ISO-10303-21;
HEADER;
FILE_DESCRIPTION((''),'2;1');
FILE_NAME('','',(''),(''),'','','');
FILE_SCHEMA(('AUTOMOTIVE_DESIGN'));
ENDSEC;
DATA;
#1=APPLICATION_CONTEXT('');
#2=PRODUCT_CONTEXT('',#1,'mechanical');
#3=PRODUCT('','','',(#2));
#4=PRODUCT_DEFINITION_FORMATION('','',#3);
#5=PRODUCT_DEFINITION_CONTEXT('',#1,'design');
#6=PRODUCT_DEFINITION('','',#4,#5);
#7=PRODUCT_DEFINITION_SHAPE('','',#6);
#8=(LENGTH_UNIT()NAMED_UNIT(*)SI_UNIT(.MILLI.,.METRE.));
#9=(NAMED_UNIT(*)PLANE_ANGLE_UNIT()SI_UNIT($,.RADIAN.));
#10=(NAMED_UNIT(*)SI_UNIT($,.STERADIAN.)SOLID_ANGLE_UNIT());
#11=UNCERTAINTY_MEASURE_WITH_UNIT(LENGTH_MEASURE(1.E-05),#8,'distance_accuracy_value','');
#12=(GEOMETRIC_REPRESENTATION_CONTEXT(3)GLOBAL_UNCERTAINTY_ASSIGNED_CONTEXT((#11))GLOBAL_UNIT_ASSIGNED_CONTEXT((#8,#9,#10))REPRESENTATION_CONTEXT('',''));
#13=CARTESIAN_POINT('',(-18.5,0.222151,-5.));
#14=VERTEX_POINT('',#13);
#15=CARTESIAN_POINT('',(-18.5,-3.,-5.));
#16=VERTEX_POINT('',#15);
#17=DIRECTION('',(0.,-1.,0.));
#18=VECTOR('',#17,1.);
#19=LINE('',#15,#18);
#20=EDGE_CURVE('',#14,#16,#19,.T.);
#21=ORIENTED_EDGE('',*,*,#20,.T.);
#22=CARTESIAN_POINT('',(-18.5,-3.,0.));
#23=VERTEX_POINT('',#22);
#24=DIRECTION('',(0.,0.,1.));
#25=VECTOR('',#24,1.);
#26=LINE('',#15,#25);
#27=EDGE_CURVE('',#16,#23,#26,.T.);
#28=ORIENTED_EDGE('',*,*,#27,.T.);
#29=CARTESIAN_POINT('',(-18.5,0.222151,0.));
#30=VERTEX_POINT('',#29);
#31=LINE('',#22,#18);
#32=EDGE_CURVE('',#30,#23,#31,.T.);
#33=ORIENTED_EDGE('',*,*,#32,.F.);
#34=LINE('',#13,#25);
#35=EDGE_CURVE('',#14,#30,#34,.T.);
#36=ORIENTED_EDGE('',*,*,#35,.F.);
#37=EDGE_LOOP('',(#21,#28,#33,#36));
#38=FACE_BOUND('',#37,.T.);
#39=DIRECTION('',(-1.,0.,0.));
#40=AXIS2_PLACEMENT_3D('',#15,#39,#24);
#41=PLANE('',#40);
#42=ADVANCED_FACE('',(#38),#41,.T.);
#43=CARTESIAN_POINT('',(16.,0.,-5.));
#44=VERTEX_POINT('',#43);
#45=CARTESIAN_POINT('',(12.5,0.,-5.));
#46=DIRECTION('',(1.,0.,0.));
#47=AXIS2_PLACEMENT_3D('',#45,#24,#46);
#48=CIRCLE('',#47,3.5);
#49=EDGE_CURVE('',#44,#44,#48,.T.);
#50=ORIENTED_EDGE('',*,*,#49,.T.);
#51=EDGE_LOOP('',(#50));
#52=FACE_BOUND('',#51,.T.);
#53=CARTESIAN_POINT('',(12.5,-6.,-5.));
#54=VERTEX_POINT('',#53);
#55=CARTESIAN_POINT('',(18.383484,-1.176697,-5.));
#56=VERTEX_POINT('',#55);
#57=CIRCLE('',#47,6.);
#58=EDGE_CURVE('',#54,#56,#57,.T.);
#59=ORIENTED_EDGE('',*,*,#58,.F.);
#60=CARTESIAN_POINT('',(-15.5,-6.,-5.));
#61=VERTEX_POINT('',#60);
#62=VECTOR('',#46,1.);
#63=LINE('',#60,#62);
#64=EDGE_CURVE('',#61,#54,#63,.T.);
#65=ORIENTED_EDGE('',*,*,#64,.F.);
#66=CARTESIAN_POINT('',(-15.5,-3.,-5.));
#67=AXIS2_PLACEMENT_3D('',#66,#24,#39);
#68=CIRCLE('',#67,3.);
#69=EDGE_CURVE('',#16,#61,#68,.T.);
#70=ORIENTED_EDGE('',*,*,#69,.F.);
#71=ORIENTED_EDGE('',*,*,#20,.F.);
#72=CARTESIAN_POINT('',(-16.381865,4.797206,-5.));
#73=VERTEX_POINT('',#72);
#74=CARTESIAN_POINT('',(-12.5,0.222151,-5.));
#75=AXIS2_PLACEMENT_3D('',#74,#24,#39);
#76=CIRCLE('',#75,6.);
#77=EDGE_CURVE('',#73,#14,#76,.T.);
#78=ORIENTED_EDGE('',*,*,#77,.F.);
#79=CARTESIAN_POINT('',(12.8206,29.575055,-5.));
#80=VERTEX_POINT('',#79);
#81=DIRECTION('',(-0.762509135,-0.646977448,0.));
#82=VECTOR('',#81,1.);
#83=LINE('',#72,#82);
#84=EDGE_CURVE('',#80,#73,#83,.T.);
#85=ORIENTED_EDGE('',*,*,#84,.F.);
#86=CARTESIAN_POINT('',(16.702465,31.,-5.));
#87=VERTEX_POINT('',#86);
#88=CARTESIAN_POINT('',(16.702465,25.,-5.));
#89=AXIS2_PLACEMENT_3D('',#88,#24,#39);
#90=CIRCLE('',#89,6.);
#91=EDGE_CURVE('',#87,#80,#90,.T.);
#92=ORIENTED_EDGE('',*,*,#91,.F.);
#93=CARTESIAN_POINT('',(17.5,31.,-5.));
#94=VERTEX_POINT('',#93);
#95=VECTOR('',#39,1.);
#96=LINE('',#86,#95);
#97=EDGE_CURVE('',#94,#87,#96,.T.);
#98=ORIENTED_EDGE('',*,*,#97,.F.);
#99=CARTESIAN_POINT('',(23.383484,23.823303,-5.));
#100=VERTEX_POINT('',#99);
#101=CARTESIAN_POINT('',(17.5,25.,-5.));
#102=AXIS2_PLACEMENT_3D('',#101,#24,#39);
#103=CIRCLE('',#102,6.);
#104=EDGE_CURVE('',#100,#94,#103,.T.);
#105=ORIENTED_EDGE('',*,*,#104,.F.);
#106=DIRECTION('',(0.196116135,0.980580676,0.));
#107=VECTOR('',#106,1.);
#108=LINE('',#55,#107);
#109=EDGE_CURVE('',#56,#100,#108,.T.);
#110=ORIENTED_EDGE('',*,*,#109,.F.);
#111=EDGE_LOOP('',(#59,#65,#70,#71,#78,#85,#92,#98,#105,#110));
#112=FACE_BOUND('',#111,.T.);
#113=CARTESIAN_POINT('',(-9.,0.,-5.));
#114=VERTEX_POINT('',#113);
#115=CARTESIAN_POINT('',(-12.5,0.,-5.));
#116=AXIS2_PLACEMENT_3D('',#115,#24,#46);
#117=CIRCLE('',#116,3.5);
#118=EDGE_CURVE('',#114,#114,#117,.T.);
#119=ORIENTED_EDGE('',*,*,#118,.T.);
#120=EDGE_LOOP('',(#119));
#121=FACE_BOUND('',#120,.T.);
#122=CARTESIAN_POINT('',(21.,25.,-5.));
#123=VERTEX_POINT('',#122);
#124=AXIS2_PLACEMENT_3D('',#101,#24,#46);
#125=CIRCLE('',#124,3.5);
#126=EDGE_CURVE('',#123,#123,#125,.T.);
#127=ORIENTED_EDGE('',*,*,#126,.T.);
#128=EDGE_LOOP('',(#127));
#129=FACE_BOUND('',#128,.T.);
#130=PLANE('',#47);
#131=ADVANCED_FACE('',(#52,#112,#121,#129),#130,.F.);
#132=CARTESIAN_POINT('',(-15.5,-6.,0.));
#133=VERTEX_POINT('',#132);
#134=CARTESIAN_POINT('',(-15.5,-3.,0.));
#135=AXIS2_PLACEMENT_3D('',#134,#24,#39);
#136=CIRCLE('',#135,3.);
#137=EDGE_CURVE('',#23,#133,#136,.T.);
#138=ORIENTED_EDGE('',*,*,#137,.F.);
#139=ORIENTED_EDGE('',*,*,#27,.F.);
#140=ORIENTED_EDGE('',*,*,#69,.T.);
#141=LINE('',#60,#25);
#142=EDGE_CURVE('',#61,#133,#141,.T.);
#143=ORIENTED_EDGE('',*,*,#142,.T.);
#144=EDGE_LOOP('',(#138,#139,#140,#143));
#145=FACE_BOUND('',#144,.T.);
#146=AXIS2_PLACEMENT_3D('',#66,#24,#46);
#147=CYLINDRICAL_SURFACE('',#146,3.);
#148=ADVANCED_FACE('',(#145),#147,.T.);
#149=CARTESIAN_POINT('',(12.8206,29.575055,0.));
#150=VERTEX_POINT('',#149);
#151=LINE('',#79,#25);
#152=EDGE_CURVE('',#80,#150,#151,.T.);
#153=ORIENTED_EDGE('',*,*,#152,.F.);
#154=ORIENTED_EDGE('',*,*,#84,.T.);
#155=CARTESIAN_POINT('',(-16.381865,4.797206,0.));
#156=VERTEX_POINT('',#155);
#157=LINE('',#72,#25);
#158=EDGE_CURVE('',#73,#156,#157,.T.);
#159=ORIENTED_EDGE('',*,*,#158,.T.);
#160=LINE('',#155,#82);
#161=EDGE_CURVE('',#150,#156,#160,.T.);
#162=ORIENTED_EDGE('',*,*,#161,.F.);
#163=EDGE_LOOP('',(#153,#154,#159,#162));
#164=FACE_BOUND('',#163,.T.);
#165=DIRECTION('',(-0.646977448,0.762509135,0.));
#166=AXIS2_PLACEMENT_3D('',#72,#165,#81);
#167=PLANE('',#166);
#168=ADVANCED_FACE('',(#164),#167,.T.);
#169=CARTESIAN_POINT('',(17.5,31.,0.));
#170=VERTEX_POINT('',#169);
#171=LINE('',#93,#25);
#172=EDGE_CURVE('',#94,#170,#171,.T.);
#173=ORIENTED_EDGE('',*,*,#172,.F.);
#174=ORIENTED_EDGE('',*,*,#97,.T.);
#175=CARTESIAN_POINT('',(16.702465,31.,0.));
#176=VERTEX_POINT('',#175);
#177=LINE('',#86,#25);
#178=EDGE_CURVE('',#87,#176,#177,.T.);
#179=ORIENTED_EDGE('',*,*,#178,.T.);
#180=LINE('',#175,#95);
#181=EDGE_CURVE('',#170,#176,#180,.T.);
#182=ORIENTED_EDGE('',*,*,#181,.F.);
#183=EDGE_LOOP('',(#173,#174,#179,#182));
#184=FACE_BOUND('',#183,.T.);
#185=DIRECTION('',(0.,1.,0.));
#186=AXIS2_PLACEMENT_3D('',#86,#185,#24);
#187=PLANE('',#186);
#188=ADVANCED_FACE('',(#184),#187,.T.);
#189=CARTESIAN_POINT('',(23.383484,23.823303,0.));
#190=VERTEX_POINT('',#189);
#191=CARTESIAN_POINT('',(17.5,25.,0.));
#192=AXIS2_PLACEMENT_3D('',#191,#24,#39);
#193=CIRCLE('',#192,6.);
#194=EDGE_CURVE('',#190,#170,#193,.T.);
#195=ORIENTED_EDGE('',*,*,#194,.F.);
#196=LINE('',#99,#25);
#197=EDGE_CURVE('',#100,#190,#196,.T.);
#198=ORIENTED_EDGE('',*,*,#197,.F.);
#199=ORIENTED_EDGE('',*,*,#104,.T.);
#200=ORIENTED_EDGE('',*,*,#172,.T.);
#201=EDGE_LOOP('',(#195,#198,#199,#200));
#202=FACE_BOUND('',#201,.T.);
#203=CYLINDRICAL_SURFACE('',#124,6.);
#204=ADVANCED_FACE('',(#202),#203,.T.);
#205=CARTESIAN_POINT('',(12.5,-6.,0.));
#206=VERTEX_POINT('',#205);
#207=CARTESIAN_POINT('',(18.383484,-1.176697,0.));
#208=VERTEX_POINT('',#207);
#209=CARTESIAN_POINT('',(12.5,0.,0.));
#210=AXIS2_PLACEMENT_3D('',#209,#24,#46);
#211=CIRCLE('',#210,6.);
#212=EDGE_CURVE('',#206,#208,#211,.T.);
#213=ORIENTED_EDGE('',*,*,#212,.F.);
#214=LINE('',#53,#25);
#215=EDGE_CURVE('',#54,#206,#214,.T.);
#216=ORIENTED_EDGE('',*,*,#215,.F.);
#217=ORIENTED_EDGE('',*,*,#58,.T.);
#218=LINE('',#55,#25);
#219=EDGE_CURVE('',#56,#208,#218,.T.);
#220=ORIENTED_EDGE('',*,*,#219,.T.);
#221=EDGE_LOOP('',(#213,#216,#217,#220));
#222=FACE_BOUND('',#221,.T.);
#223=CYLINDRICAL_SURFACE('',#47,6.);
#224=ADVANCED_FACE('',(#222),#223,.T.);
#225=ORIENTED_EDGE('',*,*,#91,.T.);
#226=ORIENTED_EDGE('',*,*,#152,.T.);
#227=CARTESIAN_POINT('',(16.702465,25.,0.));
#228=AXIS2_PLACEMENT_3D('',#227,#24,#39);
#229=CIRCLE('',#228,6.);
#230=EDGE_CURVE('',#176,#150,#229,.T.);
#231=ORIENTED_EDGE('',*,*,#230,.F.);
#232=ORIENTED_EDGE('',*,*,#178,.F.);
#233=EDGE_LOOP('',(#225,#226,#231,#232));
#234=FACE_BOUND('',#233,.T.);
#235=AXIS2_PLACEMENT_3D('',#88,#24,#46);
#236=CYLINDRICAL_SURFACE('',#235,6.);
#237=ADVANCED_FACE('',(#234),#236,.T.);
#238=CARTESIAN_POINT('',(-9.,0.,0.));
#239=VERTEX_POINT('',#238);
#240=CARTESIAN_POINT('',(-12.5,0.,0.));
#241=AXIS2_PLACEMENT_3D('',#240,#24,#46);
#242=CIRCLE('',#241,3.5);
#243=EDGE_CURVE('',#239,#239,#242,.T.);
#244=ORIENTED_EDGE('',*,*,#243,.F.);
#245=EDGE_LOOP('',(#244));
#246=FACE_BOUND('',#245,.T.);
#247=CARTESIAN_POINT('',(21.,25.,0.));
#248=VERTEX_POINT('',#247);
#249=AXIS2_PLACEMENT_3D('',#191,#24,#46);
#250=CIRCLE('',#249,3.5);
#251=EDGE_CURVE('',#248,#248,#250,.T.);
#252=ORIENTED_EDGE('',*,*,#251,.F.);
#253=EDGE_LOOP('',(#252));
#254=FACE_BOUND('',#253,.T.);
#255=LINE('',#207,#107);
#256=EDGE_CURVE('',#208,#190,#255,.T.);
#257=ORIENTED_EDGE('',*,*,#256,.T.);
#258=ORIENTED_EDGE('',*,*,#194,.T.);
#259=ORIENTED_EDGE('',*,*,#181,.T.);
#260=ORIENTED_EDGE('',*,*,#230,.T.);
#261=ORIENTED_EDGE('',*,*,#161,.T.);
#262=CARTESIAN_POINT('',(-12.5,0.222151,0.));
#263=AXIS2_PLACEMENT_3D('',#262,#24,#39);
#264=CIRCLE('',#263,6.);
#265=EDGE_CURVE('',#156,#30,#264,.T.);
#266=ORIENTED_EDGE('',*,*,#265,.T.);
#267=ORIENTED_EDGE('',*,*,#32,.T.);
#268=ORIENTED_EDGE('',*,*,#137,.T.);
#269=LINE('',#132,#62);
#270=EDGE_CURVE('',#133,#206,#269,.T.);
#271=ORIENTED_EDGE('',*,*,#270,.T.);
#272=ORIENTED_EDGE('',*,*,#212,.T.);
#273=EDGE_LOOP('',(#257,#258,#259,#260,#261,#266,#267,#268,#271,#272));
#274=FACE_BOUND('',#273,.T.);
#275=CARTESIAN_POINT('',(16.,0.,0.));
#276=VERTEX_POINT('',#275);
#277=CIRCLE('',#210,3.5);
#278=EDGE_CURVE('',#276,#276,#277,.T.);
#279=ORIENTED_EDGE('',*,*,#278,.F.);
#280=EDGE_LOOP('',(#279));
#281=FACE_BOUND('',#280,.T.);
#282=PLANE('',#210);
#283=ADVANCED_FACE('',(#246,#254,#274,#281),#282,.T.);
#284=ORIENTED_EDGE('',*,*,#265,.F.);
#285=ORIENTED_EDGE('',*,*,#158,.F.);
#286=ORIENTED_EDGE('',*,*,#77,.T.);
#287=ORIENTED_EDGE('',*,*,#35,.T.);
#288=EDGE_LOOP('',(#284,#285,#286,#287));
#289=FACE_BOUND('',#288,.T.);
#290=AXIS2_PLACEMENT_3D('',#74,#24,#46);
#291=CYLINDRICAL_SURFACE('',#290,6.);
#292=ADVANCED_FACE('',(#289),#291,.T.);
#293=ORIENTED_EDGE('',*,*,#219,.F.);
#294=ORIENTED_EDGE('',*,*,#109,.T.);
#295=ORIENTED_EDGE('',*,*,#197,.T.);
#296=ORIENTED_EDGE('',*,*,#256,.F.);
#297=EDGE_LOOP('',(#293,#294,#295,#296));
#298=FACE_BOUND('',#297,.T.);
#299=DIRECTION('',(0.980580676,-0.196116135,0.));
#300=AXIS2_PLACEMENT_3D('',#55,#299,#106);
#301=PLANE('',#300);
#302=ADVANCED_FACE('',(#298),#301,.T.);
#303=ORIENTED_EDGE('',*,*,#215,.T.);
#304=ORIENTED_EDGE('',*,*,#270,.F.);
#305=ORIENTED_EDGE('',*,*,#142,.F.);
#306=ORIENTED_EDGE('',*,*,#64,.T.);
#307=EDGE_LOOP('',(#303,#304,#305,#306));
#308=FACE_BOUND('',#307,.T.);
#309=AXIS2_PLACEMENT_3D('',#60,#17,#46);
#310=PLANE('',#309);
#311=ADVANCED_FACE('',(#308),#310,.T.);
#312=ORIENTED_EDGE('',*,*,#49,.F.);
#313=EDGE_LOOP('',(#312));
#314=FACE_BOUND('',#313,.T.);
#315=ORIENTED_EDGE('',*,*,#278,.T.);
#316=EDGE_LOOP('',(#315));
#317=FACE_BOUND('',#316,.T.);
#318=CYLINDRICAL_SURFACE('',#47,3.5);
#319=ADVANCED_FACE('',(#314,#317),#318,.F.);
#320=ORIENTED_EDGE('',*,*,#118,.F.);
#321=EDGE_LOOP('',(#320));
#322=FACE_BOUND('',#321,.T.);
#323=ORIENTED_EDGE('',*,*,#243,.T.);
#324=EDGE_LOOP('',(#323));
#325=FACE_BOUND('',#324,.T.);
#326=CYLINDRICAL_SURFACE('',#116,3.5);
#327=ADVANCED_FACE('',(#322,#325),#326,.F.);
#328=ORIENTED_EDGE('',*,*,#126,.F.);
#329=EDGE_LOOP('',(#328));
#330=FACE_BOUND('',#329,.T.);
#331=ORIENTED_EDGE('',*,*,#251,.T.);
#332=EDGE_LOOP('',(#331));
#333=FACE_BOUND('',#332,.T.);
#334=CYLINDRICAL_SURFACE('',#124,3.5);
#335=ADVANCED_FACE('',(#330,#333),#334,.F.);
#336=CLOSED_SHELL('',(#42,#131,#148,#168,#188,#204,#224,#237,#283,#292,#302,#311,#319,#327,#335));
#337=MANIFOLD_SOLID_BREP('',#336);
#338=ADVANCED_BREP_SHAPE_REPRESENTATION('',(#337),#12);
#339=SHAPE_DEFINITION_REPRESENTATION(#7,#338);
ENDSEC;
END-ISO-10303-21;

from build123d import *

# Parameters (mm, degrees)
SKETCH1_R          = 3.5
BASE_FLANGE1_DEPTH = 5


# Sheet-metal steps are written as plain solids
with BuildPart() as part:
    # Sketch1 → Base-Flange1 (new body)
    with BuildSketch(Plane.XY):
        with BuildLine():
            Line((-15.5, -6), (12.5, -6))
            ThreePointArc((12.5, -6), (16.303933434, -4.640052848), (18.383484054, -1.176696811))
            Line((18.383484054, -1.176696811), (23.383484054, 23.823303189))
            ThreePointArc((23.383484054, 23.823303189), (22.140052848, 28.803933434), (17.5, 31))
            Line((17.5, 31), (16.702465004, 31))
            ThreePointArc((16.702465004, 31), (14.634897456, 30.632509604), (12.820600314, 29.575054812))
            Line((12.820600314, 29.575054812), (-16.381864689, 4.797205718))
            ThreePointArc((-16.381864689, 4.797205718), (-17.944776769, 2.742945609), (-18.5, 0.222150906))
            Line((-18.5, 0.222150906), (-18.5, -3))
            ThreePointArc((-18.5, -3), (-17.621320344, -5.121320344), (-15.5, -6))
        make_face()
        with Locations((17.5, 25)):
            Circle(SKETCH1_R, mode=Mode.SUBTRACT)
        with Locations((12.5, 0)):
            Circle(SKETCH1_R, mode=Mode.SUBTRACT)
        with Locations((-12.5, 0)):
            Circle(SKETCH1_R, mode=Mode.SUBTRACT)
    extrude(amount=-BASE_FLANGE1_DEPTH)


solid = part.part
